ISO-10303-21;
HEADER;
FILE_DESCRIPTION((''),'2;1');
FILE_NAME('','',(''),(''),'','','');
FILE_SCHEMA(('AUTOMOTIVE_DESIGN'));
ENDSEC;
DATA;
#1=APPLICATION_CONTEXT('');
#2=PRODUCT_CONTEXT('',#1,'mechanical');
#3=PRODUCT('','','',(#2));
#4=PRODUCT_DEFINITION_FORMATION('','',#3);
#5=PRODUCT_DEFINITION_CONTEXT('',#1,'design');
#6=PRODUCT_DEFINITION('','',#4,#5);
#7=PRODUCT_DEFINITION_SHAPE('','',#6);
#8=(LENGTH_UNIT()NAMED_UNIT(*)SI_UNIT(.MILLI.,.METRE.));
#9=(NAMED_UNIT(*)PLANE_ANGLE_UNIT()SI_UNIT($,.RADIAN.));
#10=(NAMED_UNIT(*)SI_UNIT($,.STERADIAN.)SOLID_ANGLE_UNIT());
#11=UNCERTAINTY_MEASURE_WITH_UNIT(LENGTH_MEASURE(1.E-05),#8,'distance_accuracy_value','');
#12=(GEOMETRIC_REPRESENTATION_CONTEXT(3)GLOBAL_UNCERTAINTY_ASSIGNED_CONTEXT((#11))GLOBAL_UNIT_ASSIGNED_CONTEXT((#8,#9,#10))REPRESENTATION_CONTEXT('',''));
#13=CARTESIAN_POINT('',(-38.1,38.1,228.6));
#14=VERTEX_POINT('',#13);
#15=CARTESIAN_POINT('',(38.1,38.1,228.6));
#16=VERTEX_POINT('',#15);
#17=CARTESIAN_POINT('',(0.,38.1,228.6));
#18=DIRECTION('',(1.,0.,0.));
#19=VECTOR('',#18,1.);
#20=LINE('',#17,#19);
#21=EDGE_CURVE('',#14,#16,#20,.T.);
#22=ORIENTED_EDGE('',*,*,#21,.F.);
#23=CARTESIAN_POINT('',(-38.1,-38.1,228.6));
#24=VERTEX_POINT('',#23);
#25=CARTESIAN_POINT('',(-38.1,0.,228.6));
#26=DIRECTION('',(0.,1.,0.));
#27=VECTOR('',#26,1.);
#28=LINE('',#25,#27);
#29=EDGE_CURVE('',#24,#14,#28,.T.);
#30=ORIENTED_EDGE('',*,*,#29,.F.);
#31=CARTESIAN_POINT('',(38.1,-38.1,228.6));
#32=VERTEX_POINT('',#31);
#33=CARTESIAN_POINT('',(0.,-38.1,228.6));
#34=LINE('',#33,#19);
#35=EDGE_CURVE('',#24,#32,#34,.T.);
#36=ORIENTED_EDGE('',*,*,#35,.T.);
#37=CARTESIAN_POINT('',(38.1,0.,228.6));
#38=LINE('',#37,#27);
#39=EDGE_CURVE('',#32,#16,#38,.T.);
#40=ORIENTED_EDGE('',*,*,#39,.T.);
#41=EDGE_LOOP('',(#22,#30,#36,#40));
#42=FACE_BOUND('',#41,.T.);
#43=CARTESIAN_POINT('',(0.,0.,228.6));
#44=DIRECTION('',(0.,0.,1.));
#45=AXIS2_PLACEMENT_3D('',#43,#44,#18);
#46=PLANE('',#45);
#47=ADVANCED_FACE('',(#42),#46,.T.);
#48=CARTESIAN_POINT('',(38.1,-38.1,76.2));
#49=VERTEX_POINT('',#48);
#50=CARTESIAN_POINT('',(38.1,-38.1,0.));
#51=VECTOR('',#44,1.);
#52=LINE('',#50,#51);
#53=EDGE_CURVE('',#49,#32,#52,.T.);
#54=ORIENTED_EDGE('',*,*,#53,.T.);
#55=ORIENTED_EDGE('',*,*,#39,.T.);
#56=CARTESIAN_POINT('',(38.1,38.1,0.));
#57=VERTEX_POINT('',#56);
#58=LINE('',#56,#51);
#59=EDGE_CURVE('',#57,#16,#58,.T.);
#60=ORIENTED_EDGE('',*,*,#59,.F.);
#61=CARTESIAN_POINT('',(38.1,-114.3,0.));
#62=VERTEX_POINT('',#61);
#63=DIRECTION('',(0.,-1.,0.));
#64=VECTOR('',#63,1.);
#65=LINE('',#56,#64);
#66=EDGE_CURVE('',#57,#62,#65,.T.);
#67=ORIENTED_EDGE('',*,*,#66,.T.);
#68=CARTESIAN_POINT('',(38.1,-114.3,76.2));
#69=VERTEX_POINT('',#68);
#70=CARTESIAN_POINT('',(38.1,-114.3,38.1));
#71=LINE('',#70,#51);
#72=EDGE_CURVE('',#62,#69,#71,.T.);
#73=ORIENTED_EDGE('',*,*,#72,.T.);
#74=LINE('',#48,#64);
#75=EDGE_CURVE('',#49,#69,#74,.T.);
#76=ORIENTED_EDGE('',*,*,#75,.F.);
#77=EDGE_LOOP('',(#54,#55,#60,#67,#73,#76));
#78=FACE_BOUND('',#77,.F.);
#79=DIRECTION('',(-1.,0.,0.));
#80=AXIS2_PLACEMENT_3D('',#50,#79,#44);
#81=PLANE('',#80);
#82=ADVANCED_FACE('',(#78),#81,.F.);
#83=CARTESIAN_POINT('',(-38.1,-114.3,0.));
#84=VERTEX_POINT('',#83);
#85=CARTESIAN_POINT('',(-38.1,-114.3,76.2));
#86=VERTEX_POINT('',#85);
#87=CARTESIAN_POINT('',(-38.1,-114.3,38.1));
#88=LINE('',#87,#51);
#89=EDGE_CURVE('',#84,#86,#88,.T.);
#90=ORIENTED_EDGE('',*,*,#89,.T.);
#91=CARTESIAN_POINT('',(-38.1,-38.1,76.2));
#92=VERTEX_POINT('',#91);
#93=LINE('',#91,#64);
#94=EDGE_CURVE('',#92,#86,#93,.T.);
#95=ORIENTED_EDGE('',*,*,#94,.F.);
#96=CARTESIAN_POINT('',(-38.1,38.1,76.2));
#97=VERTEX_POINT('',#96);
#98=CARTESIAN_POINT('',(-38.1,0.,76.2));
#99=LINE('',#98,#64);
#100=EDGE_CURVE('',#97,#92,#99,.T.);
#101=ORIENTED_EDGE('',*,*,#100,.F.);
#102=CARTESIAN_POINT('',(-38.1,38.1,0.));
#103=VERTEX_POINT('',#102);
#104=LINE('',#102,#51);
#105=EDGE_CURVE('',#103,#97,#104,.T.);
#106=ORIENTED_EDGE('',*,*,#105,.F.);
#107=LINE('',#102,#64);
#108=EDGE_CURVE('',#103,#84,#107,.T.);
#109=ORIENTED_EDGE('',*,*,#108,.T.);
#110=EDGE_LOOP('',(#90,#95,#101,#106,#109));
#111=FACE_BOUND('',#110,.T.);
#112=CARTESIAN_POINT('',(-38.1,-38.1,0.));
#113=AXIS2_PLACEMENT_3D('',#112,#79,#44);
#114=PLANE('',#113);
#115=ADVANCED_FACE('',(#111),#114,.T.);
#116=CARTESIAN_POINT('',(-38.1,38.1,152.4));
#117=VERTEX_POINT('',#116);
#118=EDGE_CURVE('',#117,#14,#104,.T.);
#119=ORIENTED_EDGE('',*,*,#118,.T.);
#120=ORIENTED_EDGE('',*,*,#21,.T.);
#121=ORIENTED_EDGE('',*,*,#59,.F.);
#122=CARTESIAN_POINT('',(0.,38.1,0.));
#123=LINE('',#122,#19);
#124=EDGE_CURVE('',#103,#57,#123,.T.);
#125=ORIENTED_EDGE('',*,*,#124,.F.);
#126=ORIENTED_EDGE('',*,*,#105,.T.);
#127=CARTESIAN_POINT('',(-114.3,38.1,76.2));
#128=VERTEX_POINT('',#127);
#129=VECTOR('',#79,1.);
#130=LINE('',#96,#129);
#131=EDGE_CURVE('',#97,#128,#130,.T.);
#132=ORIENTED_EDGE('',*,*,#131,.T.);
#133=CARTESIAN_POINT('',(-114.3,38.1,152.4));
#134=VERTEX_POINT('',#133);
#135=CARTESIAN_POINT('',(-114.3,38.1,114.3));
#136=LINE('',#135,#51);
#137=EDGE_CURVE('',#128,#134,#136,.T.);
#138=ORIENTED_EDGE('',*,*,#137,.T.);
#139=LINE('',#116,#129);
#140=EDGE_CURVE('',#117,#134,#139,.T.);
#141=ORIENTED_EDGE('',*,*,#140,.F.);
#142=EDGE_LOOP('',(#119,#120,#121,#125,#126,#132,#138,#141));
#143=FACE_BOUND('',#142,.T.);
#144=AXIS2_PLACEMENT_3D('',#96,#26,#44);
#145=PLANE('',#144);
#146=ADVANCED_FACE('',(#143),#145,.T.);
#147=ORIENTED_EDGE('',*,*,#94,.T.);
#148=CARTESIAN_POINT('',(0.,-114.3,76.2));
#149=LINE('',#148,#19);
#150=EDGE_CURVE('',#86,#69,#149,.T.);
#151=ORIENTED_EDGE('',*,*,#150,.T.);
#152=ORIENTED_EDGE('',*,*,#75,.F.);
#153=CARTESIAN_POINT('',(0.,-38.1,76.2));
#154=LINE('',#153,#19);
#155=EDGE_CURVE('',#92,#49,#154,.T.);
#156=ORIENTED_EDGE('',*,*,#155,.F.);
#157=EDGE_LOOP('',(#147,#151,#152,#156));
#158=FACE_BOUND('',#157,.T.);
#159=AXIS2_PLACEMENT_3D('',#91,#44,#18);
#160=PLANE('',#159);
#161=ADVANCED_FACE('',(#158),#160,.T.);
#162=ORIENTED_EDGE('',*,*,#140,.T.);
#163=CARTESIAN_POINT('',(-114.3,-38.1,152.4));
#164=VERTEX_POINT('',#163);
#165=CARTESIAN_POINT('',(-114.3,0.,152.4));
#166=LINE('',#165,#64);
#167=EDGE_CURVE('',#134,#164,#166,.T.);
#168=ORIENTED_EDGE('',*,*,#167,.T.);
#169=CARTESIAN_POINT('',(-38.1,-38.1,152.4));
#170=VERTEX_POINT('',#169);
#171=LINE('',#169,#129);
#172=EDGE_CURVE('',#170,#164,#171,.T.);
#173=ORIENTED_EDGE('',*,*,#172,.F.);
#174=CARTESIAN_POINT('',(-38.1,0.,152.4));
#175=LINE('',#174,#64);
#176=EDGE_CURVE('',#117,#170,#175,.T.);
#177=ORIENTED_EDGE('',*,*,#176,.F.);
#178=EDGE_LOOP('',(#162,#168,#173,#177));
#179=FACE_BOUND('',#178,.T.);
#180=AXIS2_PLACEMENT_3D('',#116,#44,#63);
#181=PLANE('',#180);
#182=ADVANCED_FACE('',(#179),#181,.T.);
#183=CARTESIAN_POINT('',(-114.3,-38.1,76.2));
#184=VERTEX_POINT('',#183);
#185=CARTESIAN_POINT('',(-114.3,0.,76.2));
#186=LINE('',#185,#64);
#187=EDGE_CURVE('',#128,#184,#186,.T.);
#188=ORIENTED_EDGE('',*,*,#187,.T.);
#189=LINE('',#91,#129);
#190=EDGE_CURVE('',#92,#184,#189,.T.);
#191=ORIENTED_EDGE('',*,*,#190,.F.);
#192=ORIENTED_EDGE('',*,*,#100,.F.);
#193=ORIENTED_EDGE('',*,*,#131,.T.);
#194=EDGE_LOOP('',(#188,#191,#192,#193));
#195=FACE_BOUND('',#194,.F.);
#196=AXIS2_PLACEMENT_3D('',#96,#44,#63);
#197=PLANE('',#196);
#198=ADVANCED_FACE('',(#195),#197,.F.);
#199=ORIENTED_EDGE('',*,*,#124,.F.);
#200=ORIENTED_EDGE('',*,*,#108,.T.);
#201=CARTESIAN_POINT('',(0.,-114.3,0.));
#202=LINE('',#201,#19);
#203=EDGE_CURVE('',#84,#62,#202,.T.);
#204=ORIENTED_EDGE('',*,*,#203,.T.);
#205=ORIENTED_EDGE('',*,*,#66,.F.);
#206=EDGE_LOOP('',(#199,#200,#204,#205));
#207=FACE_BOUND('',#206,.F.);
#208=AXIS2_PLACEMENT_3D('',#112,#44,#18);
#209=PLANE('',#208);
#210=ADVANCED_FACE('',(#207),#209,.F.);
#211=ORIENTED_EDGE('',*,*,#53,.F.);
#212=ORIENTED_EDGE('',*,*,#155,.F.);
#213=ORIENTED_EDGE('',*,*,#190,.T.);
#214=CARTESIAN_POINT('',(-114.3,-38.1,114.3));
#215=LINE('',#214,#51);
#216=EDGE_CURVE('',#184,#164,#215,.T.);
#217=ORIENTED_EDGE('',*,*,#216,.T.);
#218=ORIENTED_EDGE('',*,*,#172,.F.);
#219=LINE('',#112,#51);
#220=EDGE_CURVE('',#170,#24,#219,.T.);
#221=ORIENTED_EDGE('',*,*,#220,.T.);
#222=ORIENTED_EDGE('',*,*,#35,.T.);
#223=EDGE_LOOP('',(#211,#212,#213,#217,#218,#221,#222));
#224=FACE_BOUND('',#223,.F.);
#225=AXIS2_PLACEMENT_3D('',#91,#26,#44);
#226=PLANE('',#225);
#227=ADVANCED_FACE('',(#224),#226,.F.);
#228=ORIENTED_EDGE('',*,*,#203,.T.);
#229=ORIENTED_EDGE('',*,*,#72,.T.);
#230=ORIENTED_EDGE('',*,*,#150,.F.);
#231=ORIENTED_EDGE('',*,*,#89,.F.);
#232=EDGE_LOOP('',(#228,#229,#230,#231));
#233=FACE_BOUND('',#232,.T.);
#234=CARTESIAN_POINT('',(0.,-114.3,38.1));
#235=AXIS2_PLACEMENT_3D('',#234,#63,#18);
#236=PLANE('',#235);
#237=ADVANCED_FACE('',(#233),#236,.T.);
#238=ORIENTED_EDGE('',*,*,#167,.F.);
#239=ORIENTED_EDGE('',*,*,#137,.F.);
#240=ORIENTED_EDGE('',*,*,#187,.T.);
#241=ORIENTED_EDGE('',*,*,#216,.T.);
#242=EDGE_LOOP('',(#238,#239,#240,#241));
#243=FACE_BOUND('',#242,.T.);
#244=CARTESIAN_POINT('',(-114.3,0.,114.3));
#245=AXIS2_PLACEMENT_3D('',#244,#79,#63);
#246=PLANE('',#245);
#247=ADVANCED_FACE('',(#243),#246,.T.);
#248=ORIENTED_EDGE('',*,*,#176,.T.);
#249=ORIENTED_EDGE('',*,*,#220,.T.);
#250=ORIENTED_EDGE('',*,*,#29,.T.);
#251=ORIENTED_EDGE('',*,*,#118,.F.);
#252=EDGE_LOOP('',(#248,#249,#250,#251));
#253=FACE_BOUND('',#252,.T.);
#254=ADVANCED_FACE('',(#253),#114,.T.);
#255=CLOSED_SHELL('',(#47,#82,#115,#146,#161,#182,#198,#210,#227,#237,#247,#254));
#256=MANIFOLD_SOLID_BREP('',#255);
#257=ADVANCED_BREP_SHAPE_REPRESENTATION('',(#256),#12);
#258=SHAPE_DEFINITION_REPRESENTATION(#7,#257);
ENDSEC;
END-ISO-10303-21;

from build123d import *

# Parameters (mm, degrees)
F1_W     = 76.2
F1_H     = 76.2
F2_DEPTH = 228.6
F3_W     = 76.2
F3_H     = 76.2
F4_DEPTH = 76.2
F5_W     = 76.2
F5_H     = 76.2
F6_DEPTH = 76.2


# Not quite as in the source:
# - a variable given as a bare number and used for a length is read in inches; the dataset says mm whatever the document's units were


with BuildPart() as f2:
    # F1 (on Top) → F2 (new body)
    with BuildSketch(Plane.XY):
        Rectangle(F1_W, F1_H)
    extrude(amount=F2_DEPTH)

    # F3 (on face) → F4 (join)
    with BuildSketch(Plane.XZ.offset(38.1)):
        with Locations((0, 38.1)):
            Rectangle(F3_W, F3_H)
    extrude(amount=F4_DEPTH)

    # F5 (on face) → F6 (join)
    with BuildSketch(Plane(origin=(-38.1, 0, 0), x_dir=(0, -1, 0), z_dir=(-1, 0, 0))):
        with Locations((0, 114.3)):
            Rectangle(F5_W, F5_H)
    extrude(amount=F6_DEPTH)


solid = f2.part
